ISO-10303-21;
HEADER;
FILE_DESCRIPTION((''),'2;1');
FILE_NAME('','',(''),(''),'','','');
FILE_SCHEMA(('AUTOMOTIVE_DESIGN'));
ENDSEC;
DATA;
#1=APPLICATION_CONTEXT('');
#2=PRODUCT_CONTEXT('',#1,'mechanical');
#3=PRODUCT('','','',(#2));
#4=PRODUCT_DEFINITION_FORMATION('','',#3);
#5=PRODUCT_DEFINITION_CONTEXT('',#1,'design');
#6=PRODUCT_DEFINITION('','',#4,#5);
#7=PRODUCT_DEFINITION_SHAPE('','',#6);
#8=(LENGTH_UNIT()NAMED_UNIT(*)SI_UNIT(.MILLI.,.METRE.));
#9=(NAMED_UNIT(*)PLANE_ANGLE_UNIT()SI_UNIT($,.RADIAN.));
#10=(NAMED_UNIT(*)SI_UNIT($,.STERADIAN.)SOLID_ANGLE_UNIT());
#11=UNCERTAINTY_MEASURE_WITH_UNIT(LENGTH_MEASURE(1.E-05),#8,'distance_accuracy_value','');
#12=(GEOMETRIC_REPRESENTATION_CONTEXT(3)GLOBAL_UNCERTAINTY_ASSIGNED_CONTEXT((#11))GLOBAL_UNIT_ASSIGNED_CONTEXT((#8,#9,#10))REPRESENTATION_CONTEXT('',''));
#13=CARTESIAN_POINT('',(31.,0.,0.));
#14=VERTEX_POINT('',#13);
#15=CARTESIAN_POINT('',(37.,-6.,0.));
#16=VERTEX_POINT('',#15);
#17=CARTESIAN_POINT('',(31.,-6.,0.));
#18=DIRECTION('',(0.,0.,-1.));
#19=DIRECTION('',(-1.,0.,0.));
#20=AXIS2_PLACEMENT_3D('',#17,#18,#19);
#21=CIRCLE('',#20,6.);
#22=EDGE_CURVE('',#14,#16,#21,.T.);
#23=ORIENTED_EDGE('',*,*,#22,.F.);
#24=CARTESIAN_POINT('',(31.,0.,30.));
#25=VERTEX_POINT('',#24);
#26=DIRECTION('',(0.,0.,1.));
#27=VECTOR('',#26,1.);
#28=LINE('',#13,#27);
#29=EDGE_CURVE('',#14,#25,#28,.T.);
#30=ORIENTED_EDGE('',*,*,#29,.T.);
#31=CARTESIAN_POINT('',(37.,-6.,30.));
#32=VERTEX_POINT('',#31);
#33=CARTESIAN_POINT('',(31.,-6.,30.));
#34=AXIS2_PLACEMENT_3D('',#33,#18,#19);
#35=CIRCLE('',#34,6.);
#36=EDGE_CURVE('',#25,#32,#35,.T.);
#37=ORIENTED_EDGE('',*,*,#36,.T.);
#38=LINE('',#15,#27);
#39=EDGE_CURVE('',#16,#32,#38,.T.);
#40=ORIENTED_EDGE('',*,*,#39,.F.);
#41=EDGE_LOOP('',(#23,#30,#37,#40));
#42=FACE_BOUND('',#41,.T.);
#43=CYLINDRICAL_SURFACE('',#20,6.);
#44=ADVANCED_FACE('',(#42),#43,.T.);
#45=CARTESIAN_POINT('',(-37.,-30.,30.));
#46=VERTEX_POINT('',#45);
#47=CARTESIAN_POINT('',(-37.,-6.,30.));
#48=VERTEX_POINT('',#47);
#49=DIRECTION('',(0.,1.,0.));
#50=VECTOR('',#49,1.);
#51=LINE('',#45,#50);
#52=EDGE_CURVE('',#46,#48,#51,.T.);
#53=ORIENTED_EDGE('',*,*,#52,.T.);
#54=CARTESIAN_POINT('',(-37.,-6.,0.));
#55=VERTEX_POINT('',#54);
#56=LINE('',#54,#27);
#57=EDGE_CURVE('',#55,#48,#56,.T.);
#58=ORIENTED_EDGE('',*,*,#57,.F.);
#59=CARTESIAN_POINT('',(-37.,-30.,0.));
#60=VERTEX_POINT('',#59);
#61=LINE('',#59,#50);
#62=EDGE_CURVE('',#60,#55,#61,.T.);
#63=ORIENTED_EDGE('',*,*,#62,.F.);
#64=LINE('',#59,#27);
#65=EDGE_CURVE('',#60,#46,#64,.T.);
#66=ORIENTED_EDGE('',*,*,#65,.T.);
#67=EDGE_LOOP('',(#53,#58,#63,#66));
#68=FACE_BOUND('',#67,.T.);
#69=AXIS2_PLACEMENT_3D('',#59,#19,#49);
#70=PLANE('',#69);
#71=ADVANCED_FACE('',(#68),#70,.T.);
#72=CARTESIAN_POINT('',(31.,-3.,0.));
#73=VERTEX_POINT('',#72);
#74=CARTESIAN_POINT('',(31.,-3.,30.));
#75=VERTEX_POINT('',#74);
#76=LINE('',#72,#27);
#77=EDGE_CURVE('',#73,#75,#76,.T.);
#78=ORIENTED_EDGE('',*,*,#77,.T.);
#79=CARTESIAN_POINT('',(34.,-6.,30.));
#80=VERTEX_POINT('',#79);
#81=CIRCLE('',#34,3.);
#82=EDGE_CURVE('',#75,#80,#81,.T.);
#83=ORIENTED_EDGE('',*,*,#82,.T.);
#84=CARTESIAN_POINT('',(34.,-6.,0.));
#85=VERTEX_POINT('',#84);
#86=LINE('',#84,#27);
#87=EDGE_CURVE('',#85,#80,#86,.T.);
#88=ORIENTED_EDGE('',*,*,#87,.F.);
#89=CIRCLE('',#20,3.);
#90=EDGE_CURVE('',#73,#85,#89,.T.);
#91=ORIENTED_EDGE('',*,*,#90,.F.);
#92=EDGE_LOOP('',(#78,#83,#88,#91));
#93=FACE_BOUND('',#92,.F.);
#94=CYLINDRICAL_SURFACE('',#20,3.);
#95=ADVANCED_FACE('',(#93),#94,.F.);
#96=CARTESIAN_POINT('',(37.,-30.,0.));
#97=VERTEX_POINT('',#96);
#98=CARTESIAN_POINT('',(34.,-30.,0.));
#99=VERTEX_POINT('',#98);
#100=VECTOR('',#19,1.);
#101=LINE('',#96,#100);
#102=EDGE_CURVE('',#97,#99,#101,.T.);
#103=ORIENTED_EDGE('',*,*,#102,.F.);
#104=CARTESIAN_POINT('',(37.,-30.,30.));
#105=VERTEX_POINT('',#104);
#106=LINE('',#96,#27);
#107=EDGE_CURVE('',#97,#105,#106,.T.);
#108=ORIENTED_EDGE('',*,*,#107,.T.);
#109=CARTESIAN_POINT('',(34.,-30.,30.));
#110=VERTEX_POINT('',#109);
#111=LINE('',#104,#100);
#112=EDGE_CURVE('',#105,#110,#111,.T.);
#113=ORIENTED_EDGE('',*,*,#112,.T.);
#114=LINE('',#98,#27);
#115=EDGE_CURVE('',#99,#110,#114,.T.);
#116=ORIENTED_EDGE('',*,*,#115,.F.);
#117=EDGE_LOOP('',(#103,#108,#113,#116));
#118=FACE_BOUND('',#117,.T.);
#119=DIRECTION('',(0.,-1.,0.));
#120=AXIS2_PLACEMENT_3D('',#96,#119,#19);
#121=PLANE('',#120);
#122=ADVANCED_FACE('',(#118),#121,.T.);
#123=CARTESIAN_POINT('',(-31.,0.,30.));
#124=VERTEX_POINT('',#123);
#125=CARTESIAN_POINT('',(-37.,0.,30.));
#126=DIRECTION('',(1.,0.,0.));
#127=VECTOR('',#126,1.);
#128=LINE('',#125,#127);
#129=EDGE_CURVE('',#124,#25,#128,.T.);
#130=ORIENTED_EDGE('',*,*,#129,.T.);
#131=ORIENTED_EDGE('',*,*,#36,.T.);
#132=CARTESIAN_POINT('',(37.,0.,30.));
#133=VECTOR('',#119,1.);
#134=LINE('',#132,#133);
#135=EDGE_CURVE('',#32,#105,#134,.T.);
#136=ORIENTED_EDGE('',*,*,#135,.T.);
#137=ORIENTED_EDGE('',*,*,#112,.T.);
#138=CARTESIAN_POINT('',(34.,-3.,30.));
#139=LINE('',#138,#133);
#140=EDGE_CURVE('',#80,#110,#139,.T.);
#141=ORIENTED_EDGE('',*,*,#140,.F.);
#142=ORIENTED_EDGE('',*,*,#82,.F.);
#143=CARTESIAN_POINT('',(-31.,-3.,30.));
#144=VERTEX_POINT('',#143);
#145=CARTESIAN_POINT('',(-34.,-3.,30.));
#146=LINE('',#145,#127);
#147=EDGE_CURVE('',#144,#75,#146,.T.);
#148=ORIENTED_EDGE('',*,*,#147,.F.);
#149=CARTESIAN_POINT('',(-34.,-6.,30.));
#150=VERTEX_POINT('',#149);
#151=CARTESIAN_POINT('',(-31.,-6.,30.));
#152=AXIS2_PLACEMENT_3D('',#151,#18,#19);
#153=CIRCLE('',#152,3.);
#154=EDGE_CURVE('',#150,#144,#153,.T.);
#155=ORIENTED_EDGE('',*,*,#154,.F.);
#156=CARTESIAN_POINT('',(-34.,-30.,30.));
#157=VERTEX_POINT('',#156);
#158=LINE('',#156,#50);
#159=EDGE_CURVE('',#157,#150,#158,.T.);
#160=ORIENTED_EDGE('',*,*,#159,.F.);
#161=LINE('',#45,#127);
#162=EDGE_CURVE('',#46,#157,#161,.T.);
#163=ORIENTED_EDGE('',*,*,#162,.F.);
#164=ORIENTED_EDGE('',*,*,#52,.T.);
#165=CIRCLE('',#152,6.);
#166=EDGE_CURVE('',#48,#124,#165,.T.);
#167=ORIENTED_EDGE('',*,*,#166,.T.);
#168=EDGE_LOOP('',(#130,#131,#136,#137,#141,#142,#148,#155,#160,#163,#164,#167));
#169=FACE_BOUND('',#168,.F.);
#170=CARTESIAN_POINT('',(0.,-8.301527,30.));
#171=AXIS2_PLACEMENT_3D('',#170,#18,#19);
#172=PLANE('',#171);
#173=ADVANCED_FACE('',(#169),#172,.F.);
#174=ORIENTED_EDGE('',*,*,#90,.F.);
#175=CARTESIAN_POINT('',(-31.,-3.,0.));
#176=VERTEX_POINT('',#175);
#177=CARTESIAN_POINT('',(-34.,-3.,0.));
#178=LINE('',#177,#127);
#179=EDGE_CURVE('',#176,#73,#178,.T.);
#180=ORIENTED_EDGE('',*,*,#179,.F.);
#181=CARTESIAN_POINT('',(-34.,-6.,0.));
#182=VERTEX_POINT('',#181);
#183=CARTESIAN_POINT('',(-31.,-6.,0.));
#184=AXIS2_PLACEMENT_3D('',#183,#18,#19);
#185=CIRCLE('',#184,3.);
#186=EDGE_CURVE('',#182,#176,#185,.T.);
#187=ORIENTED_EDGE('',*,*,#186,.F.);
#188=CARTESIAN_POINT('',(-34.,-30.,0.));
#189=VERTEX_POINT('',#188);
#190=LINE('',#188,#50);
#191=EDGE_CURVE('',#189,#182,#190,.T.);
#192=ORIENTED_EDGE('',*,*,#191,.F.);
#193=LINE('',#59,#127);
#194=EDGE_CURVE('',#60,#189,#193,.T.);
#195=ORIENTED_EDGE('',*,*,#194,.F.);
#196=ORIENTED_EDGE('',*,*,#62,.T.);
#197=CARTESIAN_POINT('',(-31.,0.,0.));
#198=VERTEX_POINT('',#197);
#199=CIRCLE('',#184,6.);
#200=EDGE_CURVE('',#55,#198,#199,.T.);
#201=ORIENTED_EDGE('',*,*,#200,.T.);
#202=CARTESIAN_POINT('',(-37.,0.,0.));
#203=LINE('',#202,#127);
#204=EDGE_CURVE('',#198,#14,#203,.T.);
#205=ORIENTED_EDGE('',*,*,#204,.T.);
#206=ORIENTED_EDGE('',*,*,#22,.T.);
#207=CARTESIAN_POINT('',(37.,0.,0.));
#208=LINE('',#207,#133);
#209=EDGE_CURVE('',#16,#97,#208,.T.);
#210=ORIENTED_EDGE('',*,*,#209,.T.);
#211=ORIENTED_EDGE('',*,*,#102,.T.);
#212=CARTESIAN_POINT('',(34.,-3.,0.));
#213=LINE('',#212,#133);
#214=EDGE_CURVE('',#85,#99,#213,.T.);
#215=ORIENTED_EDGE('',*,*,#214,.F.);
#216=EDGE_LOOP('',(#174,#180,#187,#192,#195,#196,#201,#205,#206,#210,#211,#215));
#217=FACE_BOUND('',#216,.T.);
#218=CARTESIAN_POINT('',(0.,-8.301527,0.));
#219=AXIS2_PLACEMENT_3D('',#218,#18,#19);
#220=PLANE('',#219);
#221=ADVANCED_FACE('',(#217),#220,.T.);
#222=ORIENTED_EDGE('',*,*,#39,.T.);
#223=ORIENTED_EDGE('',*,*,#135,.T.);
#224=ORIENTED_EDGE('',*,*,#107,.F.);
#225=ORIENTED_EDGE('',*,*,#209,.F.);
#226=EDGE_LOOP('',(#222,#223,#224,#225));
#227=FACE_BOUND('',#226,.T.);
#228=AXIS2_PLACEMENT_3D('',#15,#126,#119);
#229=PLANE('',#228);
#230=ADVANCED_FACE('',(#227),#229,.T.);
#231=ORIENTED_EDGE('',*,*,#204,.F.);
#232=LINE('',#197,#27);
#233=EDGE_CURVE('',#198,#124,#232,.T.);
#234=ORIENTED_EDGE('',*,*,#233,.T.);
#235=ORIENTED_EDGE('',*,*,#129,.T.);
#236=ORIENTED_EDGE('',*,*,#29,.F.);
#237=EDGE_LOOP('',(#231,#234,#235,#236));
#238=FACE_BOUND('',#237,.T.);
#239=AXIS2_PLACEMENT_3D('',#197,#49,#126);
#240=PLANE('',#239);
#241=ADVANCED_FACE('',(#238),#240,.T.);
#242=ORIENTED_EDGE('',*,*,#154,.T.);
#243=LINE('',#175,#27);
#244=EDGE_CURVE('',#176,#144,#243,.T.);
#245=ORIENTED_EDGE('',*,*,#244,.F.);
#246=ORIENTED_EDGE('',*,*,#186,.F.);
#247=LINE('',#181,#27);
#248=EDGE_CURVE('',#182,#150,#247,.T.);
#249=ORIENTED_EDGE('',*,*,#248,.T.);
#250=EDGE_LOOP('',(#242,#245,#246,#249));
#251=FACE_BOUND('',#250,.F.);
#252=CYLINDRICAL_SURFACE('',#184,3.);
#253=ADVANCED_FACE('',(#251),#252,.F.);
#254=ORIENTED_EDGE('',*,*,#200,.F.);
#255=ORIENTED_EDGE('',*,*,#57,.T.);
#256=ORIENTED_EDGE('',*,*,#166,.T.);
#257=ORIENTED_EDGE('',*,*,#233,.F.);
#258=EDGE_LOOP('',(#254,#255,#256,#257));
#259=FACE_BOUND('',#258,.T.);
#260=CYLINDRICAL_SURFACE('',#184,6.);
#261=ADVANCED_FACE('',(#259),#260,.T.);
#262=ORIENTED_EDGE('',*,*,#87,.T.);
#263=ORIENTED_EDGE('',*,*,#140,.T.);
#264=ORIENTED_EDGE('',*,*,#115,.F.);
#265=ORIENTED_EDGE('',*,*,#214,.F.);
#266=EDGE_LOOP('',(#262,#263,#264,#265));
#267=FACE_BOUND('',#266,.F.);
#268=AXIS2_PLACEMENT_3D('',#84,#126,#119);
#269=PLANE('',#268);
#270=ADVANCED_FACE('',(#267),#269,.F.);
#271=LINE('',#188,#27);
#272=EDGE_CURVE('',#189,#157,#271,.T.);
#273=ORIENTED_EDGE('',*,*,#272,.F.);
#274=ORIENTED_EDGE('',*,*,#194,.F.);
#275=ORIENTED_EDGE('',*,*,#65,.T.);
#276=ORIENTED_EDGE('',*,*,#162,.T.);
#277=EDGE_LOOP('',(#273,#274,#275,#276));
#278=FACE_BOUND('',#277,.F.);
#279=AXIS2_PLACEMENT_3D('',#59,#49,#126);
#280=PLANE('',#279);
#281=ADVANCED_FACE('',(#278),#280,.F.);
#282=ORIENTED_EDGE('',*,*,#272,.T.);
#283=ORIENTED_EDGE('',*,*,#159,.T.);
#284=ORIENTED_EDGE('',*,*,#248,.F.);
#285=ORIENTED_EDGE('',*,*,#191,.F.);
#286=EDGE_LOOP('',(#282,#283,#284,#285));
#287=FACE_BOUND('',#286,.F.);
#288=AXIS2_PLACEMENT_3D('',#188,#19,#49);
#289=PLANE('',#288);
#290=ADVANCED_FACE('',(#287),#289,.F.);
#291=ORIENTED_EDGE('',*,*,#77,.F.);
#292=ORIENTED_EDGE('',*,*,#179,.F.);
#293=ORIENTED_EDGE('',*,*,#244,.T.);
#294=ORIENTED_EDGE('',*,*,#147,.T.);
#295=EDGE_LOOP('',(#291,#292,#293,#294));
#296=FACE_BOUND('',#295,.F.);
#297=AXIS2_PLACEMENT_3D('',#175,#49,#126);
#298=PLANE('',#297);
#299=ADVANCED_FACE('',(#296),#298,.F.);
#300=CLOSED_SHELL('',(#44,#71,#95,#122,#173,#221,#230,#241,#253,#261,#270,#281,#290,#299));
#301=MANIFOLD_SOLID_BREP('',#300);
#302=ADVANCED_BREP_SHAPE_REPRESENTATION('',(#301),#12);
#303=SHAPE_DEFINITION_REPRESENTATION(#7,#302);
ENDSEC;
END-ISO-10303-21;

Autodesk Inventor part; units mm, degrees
ref_plane "YZ Plane" through (0, 0, 0) normal (1, 0, 0) x (0, 1, 0)
ref_plane "XZ Plane" through (0, 0, 0) normal (0, 1, 0) x (-1, 0, 0)
ref_plane "XY Plane" through (0, 0, 0) normal (0, 0, 1) x (1, 0, 0)
sketch "Sketch1" plane through (0, 0, 0) normal (0, 0, 1) x (1, 0, 0)
  line L0 (-37, -30) -> (-37, 0)
  line L1 (-37, 0) -> (37, 0)
  line L2 (37, 0) -> (37, -30)
  point P0 (0, 0)
  point P1 (0, 0)
  dimension "d0" = 30
  dimension "d1" = 74
contour flange "Contour Flange1" sketch "Sketch1" thickness 3 bend radius 3 width 30 along (0, 0, 1) mid plane no both sides no wall seen from (-37, -15, 0) lies toward (1, 0, 0) curves L0 L1 L2
bend "Bend1"
corner "Corner1"
equation "\"d4\" = Thickness"
equation "\"d5\" = BendReliefWidth"
equation "\"d6\" = BendReliefDepth"
equation "\"d7\" = MinimumRemnant"
equation "\"d8\" = TransitionRadius"
equation "\"d10\" = BendRadius"
equation "\"d12\" = CornerReliefSize"
equation "\"d13\" = GapSize"
equation "\"d14\" = JacobiRadiusSize"
equation "\"BendRadius\" = Thickness"
equation "\"BendReliefWidth\" = Thickness"
equation "\"BendReliefDepth\" = 0.5 * Thickness"
equation "\"CornerReliefSize\" = 4 * Thickness"
equation "\"MinimumRemnant\" = 2 * Thickness"
equation "\"TransitionRadius\" = BendRadius"
equation "\"JacobiRadiusSize\" = BendRadius"
equation "\"GapSize\" = Thickness"
equation "\"Thickness\" = 3"
properties part number "ДМФ 01 55 Усилитель кассеты v2.0"
